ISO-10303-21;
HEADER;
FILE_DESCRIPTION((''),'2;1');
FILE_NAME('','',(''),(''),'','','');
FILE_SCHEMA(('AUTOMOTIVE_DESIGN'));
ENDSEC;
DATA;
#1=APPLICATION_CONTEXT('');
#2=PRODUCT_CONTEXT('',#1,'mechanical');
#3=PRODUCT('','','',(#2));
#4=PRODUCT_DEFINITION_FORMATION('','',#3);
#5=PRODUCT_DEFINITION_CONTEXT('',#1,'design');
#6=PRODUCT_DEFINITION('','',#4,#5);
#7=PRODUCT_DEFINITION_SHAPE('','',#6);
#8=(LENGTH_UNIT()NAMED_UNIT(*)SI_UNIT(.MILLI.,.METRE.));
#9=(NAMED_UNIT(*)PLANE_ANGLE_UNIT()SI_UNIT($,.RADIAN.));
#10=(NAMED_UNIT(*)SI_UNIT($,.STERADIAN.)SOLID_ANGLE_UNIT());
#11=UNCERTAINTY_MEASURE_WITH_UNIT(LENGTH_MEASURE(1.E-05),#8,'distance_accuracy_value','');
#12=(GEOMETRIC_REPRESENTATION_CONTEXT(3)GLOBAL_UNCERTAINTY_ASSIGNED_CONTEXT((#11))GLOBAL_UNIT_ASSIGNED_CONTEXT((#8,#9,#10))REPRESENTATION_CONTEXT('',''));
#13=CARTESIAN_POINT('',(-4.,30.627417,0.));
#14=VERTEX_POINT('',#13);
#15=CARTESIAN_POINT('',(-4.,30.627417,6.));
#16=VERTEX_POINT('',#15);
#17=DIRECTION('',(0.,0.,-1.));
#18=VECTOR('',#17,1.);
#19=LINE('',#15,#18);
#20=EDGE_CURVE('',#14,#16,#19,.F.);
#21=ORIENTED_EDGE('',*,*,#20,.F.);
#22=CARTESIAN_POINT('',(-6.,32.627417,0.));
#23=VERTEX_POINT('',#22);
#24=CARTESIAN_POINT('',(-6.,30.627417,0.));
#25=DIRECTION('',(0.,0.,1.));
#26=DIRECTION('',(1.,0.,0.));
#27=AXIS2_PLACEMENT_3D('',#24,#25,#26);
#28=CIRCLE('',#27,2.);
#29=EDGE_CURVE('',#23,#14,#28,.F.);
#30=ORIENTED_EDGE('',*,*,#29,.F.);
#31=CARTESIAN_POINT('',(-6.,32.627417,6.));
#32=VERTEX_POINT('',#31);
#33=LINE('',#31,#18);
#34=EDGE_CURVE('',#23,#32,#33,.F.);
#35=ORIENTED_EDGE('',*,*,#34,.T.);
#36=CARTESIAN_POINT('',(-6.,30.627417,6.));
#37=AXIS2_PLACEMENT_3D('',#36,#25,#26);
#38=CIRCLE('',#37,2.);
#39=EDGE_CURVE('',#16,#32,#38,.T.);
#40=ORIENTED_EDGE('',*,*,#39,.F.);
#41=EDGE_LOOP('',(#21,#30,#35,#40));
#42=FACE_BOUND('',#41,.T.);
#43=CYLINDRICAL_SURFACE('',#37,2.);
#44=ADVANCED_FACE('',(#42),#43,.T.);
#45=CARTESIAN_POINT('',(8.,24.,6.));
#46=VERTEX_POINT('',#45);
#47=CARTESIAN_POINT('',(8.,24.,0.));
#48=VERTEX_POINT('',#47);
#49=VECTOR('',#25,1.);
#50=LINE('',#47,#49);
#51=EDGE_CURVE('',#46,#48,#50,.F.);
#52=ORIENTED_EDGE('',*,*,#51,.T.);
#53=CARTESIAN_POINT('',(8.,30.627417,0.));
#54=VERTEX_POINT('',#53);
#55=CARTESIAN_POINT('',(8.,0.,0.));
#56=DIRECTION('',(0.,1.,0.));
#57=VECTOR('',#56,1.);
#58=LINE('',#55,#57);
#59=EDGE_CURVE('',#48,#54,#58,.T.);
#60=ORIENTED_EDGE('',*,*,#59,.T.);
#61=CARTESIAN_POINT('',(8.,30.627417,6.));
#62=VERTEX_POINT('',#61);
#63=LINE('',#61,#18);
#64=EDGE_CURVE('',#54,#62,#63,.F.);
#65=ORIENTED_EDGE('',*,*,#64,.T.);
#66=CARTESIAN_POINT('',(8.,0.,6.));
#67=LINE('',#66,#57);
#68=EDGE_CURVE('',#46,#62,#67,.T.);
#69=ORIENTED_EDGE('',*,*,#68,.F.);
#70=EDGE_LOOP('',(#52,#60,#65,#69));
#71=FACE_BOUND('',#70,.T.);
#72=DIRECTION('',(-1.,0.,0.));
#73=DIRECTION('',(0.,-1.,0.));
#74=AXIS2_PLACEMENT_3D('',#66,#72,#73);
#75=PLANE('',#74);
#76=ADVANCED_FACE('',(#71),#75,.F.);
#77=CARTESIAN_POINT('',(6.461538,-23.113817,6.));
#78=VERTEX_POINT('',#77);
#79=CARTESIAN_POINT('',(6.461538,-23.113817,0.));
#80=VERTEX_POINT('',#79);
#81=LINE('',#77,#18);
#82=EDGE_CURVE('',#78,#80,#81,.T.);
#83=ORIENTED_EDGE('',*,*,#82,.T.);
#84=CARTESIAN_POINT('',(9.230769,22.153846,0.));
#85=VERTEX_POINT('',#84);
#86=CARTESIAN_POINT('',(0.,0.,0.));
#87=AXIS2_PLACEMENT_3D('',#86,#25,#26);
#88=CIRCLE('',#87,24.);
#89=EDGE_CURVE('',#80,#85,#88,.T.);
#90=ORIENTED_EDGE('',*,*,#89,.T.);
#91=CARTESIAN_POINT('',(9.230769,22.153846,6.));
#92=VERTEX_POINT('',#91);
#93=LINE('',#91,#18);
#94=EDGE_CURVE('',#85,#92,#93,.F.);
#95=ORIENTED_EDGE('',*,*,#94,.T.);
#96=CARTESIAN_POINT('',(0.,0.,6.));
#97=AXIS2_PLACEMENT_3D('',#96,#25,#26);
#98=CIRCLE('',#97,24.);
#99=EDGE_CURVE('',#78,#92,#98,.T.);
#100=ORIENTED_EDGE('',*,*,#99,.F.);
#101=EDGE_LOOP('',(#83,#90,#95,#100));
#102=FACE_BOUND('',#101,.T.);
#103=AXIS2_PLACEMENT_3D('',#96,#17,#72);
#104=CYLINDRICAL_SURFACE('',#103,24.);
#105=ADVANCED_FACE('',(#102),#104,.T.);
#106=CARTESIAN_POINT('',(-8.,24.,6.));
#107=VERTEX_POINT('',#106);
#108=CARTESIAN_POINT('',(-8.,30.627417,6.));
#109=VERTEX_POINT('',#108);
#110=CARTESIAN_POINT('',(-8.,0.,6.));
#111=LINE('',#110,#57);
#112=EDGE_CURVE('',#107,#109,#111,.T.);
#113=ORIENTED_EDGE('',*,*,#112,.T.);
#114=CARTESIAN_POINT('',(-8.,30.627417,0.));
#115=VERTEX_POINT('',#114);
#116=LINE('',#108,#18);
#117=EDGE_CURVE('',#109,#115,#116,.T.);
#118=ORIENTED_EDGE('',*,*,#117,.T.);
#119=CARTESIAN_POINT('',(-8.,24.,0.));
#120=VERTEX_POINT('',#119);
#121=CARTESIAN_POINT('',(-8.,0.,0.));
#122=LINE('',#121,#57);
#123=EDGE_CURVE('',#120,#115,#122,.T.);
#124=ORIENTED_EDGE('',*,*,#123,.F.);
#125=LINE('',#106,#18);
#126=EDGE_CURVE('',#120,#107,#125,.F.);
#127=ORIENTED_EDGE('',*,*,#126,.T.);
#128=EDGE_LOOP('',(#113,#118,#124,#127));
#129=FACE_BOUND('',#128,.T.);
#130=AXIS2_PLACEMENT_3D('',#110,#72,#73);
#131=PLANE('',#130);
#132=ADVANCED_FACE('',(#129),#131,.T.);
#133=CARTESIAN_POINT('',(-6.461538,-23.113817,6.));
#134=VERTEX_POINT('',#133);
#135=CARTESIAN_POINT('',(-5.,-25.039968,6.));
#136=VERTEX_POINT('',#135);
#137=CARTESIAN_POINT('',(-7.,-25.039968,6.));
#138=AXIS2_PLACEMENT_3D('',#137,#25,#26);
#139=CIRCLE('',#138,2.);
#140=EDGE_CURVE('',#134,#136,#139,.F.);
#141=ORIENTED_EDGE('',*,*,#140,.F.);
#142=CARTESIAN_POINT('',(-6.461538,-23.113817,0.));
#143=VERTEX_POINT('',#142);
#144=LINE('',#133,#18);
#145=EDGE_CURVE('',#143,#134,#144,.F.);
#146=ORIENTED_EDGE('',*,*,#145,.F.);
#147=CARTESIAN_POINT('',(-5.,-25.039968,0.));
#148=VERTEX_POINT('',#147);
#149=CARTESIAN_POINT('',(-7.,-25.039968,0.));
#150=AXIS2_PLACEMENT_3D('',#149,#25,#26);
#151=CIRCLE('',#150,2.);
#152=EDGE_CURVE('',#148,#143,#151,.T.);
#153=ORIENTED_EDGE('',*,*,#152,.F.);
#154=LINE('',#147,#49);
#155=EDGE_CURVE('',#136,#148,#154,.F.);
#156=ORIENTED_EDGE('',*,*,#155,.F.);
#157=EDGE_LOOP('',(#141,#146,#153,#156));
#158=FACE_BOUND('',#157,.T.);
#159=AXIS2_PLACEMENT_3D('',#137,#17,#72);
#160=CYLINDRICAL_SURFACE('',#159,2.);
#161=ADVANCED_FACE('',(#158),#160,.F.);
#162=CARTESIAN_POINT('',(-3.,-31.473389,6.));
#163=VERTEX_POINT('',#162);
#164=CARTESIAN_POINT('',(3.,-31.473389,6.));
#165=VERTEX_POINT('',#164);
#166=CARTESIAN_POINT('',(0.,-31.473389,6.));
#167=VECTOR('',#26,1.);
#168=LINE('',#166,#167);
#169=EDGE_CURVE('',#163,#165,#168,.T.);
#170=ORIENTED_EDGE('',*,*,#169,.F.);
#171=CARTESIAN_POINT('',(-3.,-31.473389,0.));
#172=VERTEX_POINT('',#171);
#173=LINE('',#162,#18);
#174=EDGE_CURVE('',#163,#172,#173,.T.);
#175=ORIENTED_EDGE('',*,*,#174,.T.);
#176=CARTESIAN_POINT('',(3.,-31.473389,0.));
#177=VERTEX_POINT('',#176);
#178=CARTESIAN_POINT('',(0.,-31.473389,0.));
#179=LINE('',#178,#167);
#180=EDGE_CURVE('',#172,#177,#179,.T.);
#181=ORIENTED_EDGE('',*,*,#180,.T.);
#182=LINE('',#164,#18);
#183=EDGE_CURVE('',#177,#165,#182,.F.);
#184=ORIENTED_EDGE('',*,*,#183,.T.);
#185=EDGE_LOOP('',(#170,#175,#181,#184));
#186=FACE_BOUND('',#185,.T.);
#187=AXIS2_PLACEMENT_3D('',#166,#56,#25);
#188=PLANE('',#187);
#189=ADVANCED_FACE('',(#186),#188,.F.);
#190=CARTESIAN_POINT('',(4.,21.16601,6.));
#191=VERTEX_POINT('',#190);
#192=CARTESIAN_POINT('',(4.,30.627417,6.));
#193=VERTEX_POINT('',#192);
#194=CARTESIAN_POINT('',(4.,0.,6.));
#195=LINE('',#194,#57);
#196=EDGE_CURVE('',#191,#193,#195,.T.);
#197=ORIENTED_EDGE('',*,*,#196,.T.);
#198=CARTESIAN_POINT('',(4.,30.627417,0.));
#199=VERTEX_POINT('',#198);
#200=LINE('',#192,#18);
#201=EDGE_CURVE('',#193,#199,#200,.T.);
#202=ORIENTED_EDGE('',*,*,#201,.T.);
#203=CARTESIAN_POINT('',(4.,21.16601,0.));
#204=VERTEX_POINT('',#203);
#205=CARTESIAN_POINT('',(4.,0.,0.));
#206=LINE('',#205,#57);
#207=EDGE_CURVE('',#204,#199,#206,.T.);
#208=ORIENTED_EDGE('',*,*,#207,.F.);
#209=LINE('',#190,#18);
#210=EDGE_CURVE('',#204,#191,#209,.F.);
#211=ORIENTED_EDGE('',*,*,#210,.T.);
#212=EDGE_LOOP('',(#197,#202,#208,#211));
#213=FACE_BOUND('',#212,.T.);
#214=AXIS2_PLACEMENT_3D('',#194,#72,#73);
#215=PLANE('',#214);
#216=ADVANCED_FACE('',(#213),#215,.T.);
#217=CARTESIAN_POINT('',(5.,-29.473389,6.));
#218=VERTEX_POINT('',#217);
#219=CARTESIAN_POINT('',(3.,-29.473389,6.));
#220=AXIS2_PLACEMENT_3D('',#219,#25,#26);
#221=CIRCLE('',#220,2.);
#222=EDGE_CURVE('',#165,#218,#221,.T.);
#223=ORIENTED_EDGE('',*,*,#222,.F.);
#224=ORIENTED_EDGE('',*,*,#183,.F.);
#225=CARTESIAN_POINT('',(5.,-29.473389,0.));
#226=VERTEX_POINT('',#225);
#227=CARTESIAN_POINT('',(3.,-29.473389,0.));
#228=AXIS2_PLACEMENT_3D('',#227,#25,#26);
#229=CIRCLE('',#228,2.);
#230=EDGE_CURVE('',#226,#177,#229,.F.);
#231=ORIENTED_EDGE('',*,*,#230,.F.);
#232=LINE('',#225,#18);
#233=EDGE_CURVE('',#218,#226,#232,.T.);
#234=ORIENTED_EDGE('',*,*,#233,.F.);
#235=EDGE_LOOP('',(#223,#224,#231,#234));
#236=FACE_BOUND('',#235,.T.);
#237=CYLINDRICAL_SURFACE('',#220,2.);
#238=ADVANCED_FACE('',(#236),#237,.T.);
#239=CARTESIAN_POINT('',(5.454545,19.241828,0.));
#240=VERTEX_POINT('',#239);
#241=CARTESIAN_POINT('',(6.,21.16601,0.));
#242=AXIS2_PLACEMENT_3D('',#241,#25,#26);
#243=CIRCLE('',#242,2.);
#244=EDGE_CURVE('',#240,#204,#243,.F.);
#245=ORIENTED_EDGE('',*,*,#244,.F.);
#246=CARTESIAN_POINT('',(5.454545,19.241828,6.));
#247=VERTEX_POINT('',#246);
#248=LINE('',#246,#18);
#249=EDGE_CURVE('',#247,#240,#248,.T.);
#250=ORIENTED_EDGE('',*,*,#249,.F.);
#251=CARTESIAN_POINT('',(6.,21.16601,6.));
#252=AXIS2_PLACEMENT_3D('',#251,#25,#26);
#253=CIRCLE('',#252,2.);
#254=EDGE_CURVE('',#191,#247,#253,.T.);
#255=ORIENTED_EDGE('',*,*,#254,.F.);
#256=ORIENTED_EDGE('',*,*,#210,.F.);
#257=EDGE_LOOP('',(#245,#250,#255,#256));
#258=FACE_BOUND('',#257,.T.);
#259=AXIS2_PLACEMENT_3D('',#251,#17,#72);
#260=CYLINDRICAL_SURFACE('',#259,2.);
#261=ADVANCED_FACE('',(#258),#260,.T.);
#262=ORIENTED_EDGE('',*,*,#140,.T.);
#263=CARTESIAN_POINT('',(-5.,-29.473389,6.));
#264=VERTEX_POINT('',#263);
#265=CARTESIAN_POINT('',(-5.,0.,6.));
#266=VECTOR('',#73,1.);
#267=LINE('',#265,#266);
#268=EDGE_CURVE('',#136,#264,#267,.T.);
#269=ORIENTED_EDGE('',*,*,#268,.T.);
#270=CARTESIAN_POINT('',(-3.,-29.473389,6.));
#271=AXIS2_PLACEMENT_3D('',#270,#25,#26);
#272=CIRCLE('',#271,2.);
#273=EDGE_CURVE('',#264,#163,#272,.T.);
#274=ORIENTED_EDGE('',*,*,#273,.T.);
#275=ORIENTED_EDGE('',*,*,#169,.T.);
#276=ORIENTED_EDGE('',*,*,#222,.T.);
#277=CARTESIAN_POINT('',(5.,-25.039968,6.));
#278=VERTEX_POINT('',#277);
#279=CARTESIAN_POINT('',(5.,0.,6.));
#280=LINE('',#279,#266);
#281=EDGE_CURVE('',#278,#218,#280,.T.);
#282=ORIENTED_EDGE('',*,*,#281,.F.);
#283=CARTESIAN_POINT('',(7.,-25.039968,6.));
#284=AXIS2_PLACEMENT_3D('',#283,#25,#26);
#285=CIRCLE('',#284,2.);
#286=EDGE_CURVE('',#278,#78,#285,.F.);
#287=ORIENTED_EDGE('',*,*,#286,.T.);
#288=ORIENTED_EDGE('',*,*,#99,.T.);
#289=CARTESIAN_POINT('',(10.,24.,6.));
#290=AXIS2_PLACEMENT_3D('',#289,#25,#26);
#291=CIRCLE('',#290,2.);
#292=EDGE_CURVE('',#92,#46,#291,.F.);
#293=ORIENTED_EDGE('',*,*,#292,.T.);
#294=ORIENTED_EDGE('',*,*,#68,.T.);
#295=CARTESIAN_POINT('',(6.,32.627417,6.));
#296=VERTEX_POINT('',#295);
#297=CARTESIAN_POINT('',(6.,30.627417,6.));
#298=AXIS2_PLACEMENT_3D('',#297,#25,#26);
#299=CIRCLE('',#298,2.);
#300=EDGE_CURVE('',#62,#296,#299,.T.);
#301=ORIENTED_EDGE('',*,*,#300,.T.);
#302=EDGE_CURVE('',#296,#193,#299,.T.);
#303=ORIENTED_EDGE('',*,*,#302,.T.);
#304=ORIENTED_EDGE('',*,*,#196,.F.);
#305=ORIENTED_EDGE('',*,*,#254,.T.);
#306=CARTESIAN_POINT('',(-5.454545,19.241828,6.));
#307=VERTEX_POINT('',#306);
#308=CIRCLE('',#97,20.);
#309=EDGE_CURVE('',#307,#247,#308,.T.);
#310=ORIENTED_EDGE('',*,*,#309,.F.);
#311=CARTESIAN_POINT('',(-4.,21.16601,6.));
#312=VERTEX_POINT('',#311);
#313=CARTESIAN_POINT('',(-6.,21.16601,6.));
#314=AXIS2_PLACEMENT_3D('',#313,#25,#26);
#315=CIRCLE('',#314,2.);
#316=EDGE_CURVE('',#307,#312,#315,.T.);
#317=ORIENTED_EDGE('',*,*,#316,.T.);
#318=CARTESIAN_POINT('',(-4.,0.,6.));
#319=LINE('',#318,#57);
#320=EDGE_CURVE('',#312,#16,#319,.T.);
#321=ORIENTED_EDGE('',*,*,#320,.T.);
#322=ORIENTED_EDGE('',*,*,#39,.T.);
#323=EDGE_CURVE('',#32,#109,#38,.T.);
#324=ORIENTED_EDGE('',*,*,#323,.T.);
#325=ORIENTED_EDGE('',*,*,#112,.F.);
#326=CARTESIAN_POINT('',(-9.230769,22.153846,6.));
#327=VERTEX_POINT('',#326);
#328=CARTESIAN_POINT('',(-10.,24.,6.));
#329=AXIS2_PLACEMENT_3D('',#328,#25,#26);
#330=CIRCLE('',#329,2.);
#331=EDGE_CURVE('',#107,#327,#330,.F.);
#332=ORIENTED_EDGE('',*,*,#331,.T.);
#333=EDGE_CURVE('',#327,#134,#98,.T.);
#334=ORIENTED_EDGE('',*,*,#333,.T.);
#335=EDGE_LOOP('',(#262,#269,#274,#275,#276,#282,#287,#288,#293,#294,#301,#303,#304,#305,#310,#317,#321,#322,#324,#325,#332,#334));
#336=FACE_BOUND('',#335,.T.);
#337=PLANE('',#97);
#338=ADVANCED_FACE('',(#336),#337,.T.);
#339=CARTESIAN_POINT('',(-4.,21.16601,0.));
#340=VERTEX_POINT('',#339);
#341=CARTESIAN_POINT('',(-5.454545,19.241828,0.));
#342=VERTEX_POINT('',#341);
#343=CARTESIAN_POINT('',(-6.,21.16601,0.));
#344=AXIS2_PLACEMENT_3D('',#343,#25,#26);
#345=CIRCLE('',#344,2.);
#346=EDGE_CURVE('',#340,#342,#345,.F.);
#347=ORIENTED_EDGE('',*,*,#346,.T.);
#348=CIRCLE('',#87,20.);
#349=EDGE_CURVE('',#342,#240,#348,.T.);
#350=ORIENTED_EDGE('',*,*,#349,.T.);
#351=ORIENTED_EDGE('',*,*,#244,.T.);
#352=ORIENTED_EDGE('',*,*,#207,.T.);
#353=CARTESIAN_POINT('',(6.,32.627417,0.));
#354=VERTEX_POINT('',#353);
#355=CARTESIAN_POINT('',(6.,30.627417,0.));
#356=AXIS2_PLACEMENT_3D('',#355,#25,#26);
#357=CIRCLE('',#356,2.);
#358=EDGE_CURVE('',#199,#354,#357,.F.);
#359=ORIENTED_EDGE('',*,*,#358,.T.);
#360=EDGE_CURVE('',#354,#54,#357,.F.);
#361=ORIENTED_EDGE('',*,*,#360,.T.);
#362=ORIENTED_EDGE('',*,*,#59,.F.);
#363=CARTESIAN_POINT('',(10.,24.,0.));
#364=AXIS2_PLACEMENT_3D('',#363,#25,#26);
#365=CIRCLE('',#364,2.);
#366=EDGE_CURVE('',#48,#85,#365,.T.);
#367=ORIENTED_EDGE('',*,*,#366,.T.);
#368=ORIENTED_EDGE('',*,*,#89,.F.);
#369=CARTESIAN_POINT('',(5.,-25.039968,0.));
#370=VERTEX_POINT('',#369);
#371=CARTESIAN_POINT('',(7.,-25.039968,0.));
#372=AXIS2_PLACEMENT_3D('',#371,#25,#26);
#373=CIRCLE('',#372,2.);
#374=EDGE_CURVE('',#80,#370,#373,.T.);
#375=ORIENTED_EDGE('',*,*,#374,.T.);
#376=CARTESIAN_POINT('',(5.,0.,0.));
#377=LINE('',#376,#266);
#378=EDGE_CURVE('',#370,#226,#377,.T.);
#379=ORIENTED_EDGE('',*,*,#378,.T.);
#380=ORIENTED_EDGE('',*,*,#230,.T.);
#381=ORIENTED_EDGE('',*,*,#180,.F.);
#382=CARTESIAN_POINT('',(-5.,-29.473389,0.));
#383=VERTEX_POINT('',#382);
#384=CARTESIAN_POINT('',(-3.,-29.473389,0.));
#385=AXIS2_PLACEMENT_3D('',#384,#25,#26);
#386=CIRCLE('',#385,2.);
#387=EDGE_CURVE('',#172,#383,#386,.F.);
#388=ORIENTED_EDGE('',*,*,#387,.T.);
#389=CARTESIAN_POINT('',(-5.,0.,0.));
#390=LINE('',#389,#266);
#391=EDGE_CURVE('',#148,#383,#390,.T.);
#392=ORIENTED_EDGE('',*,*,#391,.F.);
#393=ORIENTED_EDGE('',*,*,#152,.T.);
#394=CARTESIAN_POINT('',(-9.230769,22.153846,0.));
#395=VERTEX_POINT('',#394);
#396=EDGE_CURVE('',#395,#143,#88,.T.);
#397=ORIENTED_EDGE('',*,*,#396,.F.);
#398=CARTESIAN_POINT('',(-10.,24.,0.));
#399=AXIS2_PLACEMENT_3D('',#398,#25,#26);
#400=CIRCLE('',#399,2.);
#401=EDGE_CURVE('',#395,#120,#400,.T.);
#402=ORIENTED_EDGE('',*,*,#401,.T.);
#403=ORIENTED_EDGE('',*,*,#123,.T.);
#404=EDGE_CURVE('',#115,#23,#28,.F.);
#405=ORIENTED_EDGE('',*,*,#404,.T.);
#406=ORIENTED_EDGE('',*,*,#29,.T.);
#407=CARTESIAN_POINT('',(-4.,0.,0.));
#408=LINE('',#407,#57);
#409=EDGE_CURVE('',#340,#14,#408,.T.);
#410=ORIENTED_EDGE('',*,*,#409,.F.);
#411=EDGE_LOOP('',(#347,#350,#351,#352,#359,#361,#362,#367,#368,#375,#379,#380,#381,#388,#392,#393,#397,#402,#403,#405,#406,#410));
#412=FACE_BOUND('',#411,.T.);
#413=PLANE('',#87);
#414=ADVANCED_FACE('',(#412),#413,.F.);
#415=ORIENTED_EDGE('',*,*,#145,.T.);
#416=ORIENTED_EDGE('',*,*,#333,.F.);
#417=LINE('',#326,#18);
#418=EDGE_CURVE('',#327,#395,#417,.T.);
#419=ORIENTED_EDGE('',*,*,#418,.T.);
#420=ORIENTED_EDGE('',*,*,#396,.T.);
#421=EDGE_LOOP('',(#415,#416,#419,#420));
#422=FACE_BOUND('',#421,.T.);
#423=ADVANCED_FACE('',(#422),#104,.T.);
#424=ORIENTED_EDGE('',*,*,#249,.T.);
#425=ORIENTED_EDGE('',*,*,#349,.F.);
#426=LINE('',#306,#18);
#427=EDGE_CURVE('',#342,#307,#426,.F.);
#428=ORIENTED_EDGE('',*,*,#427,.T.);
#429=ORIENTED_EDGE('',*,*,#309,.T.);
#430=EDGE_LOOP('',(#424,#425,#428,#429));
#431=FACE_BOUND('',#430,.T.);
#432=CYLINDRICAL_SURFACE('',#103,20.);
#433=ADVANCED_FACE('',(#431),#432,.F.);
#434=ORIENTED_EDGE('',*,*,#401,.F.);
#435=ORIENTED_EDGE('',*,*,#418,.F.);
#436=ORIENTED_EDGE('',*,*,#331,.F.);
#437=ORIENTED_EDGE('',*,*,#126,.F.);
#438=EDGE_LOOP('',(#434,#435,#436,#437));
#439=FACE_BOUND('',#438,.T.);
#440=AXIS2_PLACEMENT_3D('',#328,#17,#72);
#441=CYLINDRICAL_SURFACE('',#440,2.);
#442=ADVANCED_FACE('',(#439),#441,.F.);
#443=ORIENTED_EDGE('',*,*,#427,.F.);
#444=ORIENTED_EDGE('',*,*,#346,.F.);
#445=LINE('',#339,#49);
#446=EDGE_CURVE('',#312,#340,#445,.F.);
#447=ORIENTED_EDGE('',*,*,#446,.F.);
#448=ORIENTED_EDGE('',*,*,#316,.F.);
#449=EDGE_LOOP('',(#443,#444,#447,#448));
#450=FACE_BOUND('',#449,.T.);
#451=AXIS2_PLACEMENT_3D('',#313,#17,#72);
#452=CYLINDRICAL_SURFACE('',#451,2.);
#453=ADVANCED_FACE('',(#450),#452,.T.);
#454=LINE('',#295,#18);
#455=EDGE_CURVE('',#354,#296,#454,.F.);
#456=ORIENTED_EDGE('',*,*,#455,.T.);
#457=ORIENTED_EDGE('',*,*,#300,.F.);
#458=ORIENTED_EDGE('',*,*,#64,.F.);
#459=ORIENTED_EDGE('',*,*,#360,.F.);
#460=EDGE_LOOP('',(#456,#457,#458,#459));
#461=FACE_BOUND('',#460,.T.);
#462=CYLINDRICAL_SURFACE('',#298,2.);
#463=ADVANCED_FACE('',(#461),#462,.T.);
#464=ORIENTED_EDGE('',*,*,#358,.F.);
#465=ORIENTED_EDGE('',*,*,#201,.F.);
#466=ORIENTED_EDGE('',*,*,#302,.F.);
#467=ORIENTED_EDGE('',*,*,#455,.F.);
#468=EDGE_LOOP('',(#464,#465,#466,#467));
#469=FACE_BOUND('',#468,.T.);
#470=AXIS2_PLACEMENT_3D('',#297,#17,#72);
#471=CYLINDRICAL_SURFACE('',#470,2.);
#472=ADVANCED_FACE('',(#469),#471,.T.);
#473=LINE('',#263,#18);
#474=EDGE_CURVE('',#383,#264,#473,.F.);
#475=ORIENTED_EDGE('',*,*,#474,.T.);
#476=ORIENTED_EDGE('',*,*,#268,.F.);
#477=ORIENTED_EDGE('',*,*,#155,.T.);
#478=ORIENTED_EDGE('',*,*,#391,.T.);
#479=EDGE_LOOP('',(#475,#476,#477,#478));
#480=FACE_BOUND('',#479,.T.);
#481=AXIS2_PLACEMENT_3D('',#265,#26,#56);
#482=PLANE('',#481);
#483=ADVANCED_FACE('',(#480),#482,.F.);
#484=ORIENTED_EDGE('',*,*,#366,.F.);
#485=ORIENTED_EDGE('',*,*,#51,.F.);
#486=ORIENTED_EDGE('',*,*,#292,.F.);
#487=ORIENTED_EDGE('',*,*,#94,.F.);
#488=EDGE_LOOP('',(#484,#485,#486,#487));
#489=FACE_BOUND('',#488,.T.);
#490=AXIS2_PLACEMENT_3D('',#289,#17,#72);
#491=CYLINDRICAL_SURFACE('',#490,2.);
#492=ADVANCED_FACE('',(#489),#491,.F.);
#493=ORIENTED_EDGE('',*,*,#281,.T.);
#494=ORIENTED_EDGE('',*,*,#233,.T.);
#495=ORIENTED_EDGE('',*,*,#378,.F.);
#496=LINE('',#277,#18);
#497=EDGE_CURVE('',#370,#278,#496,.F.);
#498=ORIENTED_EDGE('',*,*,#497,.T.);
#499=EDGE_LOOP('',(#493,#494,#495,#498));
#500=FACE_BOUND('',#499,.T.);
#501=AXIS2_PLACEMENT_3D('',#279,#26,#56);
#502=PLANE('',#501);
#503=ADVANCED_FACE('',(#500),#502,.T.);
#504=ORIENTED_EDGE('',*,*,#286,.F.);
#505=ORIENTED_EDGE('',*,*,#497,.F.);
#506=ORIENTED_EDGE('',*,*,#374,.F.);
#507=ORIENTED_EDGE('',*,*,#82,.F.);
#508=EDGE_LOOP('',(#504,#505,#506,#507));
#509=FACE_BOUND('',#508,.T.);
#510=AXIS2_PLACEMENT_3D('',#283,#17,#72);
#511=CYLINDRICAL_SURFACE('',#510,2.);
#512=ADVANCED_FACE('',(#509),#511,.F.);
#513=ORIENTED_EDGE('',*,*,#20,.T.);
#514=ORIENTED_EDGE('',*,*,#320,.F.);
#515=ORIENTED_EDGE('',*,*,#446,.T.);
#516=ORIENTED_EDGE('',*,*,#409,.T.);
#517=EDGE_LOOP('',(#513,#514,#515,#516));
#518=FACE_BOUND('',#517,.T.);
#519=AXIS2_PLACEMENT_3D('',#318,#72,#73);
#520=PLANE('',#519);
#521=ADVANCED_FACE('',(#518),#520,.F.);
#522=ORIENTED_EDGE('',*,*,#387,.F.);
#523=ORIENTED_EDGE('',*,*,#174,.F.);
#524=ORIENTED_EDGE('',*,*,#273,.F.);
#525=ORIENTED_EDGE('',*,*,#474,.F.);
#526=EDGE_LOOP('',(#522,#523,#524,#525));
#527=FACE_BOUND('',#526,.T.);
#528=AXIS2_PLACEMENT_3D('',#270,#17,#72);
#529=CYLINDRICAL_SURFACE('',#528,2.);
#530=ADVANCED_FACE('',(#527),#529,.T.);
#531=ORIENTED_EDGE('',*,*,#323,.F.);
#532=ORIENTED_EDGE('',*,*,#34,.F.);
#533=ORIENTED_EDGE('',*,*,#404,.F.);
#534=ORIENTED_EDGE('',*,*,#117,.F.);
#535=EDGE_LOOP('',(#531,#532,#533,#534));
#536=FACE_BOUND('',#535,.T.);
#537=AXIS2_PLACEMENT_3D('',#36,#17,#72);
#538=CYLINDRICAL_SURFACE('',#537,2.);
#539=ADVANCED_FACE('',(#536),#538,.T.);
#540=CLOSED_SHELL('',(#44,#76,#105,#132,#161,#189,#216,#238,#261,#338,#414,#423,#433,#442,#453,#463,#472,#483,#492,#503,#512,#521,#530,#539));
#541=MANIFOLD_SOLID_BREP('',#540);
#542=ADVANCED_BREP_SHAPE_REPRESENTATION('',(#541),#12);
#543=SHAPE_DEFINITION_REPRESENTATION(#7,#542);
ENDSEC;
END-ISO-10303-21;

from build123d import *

# Parameters (mm, degrees)
BOSS_EXTRUDE1_DEPTH = 6
FILLET1_R           = 2


with BuildPart() as part:
    # Sketch1 → Boss-Extrude1 (new body)
    with BuildSketch(Plane.XY):
        with BuildLine():
            Line((4, 32.627416998), (8, 32.627416998))
            Line((8, 32.627416998), (8, 22.627416998))
            ThreePointArc((8, 22.627416998), (23.949344099, -1.558498392), (5, -23.473389189))
            Line((5, -23.473389189), (5, -31.473389189))
            Line((5, -31.473389189), (-5, -31.473389189))
            Line((-5, -31.473389189), (-5, -23.473389189))
            ThreePointArc((-5, -23.473389189), (-23.949344099, -1.558498392), (-8, 22.627416998))
            Line((-8, 22.627416998), (-8, 32.627416998))
            Line((-8, 32.627416998), (-4, 32.627416998))
            Line((-4, 32.627416998), (-4, 19.595917942))
            ThreePointArc((-4, 19.595917942), (0, -20), (4, 19.595917942))
            Line((4, 19.595917942), (4, 32.627416998))
        make_face()
    extrude(amount=BOSS_EXTRUDE1_DEPTH)

    # Fillet1
    fillet1_edges = [part.edges().sort_by_distance(p)[0] for p in [
        (-4, 19.595917942, 3),
        (4, 19.595917942, 3),
        (-8, 22.627416998, 3),
        (8, 32.627416998, 3),
        (4, 32.627416998, 3),
        (-4, 32.627416998, 3),
        (-8, 32.627416998, 3),
        (-5, -31.473389189, 3),
        (-5, -23.473389189, 3),
        (5, -31.473389189, 3),
        (5, -23.473389189, 3),
        (8, 22.627416998, 3),
    ]]
    fillet(fillet1_edges, radius=FILLET1_R - 0.0001)  # a hair under: the kernel refuses the full size


solid = part.part
